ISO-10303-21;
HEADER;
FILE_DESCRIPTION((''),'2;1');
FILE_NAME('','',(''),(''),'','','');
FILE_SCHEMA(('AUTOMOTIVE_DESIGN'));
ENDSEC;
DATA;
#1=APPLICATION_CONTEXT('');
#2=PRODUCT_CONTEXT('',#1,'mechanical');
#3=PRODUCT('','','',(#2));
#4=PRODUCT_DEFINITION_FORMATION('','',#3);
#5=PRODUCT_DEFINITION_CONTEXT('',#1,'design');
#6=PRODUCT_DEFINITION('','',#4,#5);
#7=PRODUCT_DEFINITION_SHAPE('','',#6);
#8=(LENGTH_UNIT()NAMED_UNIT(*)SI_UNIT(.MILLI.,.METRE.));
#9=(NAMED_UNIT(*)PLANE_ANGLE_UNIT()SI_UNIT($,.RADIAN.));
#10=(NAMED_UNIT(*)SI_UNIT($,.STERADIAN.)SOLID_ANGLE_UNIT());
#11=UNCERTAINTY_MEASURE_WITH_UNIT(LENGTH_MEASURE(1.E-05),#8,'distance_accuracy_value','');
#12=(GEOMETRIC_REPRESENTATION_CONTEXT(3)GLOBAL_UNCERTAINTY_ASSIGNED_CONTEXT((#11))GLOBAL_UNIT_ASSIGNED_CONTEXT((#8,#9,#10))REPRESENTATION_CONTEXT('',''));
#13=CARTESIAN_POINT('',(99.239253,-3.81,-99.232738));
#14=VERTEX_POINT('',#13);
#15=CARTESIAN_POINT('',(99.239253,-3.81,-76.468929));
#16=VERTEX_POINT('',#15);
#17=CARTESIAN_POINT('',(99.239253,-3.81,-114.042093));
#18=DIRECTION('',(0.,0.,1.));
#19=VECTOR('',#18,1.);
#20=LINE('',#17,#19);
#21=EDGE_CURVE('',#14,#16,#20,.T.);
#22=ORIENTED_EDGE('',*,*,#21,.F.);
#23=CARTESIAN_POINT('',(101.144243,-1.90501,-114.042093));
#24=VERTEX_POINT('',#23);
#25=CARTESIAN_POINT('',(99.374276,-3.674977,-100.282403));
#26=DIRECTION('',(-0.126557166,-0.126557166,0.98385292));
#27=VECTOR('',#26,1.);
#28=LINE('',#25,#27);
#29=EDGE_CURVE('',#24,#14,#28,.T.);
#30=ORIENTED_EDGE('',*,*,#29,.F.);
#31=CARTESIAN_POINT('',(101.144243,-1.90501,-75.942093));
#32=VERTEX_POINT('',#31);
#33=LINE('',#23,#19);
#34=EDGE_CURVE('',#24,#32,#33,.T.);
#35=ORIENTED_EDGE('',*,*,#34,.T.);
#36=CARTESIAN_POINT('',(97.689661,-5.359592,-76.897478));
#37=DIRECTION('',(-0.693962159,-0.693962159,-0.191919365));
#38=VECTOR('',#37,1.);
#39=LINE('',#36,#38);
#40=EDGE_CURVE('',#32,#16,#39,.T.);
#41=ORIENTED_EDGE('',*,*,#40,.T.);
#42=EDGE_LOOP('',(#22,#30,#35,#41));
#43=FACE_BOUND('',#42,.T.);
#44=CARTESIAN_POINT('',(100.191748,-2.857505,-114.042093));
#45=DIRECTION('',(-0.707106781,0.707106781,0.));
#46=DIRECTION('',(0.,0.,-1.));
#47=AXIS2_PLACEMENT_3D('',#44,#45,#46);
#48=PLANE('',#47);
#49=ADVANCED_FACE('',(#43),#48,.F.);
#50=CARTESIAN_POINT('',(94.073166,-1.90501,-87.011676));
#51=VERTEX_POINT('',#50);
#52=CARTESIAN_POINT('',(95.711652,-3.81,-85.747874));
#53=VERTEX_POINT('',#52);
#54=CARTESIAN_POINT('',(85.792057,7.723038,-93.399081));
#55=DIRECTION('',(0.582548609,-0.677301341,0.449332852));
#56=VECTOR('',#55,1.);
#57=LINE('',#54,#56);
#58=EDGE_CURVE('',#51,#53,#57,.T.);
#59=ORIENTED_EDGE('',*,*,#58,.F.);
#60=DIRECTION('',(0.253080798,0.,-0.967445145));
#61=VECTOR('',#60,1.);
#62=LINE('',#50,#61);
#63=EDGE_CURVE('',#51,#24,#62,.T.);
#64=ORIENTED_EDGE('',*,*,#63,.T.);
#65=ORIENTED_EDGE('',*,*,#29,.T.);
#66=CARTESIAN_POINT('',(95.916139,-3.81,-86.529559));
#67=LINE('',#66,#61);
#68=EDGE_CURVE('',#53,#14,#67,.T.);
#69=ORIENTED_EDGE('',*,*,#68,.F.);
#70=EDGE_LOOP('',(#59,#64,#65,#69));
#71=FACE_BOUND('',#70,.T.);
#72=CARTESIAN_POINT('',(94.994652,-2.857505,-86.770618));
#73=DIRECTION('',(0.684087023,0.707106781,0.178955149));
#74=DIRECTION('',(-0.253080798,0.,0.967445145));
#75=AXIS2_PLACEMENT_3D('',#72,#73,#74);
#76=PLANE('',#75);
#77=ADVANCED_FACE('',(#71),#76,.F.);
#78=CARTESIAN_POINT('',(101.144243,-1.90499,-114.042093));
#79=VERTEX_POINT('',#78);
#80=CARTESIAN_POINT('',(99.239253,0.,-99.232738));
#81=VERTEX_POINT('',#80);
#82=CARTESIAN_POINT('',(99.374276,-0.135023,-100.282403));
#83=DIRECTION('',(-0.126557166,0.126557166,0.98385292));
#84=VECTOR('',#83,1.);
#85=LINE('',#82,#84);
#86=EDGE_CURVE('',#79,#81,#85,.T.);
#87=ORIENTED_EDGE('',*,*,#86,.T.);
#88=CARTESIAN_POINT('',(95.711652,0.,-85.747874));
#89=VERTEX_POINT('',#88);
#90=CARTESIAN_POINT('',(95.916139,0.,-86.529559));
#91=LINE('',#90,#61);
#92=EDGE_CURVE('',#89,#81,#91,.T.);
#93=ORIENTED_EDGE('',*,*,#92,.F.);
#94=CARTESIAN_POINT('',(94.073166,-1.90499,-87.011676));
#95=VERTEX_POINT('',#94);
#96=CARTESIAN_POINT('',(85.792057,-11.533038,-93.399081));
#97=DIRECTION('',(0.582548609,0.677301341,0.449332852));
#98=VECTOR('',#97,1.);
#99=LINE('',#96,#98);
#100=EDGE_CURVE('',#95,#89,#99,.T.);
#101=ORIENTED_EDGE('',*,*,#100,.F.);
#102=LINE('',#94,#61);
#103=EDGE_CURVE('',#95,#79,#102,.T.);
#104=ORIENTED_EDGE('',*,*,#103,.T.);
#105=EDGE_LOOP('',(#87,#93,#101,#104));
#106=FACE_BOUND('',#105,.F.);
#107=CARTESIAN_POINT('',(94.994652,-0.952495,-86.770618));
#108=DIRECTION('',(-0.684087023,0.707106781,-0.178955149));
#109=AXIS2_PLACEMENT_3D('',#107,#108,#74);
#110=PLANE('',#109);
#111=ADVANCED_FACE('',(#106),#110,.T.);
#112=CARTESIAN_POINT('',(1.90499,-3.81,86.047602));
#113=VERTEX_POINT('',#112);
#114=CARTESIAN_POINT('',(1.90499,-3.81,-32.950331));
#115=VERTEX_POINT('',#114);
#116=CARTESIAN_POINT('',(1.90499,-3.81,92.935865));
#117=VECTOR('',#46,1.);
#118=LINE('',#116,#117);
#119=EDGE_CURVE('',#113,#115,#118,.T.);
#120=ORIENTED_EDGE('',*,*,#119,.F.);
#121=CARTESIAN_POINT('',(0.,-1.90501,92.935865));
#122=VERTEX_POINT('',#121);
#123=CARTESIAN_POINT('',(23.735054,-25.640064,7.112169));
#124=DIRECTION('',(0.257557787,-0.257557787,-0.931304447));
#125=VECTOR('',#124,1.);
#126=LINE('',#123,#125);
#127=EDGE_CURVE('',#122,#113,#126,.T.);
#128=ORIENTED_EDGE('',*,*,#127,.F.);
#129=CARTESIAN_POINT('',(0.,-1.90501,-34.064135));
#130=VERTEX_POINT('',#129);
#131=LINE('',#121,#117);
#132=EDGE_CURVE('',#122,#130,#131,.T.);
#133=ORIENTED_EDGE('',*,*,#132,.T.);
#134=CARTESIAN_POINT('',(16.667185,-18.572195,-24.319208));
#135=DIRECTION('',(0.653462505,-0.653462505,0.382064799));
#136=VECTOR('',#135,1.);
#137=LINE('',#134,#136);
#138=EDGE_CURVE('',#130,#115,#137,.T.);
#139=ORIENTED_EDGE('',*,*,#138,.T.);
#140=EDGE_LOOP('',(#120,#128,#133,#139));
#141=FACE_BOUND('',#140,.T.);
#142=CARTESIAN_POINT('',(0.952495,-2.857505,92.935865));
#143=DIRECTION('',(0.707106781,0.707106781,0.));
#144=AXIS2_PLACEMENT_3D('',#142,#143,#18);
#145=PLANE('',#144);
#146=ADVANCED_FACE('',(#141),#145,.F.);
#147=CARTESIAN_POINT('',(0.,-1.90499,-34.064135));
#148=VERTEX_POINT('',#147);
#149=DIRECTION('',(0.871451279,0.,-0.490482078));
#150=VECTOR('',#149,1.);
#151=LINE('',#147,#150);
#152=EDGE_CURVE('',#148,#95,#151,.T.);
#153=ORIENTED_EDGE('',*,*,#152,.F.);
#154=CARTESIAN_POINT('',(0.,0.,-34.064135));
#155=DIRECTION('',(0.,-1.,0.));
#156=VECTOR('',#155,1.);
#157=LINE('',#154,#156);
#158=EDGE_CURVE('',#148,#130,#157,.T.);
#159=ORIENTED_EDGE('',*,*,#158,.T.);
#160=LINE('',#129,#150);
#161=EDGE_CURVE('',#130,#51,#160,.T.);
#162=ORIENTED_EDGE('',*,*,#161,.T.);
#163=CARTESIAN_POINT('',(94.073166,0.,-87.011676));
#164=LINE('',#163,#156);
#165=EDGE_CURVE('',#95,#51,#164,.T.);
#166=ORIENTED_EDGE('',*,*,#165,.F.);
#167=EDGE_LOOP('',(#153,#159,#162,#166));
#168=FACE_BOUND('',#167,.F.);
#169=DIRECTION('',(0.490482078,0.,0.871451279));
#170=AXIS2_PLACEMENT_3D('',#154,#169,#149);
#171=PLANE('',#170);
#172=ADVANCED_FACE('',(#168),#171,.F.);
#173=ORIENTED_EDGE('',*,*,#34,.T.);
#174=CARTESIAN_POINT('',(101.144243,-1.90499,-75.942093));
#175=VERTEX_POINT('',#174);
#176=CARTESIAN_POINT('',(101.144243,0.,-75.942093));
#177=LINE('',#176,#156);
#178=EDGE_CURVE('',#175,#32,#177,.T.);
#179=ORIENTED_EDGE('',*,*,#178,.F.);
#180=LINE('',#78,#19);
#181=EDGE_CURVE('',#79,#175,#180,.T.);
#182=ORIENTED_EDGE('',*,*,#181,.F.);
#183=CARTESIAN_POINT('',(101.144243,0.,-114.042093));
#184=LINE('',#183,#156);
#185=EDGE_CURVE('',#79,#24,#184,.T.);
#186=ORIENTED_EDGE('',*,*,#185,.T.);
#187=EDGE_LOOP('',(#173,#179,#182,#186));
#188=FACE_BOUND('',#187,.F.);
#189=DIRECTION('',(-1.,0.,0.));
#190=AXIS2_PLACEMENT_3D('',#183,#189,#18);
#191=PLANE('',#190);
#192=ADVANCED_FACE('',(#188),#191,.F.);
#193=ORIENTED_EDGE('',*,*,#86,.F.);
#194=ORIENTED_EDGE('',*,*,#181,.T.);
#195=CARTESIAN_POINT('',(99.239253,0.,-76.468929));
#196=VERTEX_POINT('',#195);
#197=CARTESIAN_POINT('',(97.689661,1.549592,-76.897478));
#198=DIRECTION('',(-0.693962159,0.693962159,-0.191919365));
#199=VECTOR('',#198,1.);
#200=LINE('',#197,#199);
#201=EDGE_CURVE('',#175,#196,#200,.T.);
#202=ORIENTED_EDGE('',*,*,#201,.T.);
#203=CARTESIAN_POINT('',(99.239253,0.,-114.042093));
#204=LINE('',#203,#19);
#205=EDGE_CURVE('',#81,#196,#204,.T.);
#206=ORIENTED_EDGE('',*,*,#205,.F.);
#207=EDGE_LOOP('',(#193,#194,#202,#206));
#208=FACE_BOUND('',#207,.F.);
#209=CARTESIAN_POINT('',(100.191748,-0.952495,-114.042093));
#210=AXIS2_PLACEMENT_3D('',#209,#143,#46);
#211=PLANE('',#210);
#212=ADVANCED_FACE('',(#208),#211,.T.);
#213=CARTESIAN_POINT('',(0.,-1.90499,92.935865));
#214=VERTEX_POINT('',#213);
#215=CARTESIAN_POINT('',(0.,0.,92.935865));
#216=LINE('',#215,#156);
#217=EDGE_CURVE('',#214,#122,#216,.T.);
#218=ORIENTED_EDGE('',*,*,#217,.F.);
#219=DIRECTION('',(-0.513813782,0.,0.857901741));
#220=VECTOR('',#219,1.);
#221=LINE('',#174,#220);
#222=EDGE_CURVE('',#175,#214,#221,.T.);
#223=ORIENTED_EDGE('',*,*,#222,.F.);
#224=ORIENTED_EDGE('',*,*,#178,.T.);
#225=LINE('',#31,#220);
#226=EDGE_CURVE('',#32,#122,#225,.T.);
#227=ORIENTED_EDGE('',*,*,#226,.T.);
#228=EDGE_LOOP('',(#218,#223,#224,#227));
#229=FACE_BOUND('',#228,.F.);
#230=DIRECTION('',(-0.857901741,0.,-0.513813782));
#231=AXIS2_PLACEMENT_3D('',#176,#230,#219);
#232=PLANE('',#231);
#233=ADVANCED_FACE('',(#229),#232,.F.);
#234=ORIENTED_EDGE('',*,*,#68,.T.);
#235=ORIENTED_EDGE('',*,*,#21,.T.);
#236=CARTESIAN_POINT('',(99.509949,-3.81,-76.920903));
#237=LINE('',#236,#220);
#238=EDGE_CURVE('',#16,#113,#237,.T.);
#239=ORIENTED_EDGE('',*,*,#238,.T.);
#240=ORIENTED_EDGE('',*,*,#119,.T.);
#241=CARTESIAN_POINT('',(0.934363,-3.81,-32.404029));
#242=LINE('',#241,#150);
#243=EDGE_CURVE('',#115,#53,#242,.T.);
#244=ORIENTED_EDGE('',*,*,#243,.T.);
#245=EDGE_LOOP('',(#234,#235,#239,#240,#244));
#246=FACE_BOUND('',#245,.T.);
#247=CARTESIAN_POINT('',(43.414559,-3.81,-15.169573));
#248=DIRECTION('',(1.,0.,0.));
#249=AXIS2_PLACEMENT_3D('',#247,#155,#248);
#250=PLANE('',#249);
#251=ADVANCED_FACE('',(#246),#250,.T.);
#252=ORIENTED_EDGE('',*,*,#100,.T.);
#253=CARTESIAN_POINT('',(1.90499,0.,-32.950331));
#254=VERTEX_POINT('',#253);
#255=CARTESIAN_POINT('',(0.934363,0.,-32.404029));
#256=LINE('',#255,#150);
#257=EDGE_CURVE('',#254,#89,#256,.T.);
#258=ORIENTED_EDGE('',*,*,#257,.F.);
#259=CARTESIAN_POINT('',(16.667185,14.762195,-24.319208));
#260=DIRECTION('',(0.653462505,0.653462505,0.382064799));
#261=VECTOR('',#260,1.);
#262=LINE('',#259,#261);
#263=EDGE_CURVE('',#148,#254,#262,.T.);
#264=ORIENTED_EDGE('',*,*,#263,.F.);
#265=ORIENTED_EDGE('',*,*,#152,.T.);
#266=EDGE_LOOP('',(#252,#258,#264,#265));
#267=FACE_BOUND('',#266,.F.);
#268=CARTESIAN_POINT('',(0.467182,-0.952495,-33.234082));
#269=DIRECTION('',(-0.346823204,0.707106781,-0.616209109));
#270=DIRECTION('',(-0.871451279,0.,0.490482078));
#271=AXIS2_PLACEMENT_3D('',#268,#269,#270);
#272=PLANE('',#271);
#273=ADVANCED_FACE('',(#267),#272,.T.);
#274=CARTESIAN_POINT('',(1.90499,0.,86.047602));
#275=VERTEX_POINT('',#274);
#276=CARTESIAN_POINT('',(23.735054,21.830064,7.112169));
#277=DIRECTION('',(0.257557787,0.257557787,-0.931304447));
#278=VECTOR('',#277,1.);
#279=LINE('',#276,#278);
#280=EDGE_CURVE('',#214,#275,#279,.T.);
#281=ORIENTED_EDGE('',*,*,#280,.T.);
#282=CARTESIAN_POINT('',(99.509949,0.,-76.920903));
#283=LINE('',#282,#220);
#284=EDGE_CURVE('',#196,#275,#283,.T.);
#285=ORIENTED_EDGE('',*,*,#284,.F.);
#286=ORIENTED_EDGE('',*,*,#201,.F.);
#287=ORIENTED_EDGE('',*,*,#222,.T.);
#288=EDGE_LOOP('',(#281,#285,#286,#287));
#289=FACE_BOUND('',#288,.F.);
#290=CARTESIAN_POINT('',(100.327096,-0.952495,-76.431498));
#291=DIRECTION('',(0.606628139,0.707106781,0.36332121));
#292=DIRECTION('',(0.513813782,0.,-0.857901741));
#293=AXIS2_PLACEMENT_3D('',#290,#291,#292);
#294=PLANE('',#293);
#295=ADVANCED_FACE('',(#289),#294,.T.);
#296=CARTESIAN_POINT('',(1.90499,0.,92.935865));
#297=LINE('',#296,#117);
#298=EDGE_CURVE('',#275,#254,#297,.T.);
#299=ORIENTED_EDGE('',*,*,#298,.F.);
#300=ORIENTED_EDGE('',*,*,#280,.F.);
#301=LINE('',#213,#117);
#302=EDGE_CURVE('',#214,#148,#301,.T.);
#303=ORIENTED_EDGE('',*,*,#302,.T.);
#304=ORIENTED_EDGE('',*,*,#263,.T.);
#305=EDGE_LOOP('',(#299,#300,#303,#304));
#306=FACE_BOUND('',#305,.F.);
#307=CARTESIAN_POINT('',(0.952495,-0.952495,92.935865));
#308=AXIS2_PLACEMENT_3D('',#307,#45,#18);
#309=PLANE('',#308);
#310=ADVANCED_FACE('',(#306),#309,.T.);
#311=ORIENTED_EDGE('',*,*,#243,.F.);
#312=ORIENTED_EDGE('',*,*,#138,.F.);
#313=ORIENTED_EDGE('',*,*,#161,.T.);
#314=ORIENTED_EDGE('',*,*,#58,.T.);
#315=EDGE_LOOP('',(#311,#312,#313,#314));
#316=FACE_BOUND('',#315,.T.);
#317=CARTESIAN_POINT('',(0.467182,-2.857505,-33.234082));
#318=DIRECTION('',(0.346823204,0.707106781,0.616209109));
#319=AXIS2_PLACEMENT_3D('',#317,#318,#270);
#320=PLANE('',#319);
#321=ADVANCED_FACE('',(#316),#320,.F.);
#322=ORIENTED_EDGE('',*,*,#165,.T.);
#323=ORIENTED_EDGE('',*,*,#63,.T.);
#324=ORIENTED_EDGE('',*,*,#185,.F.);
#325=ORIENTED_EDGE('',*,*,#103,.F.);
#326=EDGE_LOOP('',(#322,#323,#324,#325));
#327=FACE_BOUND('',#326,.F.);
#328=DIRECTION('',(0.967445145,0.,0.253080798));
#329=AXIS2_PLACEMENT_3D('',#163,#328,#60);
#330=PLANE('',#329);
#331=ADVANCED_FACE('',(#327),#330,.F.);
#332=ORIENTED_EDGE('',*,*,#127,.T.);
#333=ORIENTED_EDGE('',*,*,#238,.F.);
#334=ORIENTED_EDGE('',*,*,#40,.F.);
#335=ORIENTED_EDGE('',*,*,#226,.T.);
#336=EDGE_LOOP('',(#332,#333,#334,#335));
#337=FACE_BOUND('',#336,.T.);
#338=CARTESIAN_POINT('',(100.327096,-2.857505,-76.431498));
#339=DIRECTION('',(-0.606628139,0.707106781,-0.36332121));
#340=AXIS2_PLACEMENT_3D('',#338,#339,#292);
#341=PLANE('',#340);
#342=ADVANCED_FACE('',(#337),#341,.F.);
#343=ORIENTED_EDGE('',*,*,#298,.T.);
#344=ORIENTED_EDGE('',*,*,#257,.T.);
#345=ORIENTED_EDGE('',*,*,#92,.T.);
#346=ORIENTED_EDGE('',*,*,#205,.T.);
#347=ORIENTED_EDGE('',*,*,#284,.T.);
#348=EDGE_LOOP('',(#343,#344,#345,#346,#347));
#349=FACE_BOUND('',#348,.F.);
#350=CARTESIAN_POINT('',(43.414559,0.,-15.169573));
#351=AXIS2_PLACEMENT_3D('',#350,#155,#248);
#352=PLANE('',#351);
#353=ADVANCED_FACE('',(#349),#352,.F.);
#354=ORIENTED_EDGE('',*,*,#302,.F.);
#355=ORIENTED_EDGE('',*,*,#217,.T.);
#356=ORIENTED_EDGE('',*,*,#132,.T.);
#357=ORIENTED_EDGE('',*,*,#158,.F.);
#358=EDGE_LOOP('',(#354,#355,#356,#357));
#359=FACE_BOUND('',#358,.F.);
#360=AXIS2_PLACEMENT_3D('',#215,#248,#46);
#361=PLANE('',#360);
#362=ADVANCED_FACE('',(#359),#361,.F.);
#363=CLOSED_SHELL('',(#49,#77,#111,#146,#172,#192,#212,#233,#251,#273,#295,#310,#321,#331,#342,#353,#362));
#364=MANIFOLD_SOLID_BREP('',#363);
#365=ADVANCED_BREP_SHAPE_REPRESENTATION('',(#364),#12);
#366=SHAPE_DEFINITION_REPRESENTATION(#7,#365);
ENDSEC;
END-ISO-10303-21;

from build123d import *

# Parameters (mm, degrees)
F1_DEPTH = 3.81
F2_SIZE  = 1.90499


# Not quite as in the source:
# - a fillet or chamfer is up to 0.001 mm smaller than in the source, because OpenCascade refuses the exact size


with BuildPart() as f1:
    # F0 (on Front) → F1 (new body)
    with BuildSketch(Plane.XZ):
        Polygon((101.1442430278, -75.9420931081), (0, 92.935864608), (0, -34.064135392), (94.0731655183, -87.0116757444), (101.1442430278, -114.0420931081), align=None)
    extrude(amount=F1_DEPTH)

    # F2 (size 1.905 in the source; OpenCascade refuses exactly that, so slightly less here)
    f2_edges = [f1.edges().sort_by_distance(p)[0] for p in [
        (47.036583, -3.81, -60.537906),
        (97.608704, -3.81, -100.526884),
        (101.144243, -3.81, -94.992093),
        (50.572122, -3.81, 8.496886),
        (0, -3.81, 29.435865),
        (47.036583, 0, -60.537906),
        (97.608704, 0, -100.526884),
        (101.144243, 0, -94.992093),
        (50.572122, 0, 8.496886),
        (0, 0, 29.435865),
    ]]
    chamfer(f2_edges, length=F2_SIZE)


solid = f1.part
